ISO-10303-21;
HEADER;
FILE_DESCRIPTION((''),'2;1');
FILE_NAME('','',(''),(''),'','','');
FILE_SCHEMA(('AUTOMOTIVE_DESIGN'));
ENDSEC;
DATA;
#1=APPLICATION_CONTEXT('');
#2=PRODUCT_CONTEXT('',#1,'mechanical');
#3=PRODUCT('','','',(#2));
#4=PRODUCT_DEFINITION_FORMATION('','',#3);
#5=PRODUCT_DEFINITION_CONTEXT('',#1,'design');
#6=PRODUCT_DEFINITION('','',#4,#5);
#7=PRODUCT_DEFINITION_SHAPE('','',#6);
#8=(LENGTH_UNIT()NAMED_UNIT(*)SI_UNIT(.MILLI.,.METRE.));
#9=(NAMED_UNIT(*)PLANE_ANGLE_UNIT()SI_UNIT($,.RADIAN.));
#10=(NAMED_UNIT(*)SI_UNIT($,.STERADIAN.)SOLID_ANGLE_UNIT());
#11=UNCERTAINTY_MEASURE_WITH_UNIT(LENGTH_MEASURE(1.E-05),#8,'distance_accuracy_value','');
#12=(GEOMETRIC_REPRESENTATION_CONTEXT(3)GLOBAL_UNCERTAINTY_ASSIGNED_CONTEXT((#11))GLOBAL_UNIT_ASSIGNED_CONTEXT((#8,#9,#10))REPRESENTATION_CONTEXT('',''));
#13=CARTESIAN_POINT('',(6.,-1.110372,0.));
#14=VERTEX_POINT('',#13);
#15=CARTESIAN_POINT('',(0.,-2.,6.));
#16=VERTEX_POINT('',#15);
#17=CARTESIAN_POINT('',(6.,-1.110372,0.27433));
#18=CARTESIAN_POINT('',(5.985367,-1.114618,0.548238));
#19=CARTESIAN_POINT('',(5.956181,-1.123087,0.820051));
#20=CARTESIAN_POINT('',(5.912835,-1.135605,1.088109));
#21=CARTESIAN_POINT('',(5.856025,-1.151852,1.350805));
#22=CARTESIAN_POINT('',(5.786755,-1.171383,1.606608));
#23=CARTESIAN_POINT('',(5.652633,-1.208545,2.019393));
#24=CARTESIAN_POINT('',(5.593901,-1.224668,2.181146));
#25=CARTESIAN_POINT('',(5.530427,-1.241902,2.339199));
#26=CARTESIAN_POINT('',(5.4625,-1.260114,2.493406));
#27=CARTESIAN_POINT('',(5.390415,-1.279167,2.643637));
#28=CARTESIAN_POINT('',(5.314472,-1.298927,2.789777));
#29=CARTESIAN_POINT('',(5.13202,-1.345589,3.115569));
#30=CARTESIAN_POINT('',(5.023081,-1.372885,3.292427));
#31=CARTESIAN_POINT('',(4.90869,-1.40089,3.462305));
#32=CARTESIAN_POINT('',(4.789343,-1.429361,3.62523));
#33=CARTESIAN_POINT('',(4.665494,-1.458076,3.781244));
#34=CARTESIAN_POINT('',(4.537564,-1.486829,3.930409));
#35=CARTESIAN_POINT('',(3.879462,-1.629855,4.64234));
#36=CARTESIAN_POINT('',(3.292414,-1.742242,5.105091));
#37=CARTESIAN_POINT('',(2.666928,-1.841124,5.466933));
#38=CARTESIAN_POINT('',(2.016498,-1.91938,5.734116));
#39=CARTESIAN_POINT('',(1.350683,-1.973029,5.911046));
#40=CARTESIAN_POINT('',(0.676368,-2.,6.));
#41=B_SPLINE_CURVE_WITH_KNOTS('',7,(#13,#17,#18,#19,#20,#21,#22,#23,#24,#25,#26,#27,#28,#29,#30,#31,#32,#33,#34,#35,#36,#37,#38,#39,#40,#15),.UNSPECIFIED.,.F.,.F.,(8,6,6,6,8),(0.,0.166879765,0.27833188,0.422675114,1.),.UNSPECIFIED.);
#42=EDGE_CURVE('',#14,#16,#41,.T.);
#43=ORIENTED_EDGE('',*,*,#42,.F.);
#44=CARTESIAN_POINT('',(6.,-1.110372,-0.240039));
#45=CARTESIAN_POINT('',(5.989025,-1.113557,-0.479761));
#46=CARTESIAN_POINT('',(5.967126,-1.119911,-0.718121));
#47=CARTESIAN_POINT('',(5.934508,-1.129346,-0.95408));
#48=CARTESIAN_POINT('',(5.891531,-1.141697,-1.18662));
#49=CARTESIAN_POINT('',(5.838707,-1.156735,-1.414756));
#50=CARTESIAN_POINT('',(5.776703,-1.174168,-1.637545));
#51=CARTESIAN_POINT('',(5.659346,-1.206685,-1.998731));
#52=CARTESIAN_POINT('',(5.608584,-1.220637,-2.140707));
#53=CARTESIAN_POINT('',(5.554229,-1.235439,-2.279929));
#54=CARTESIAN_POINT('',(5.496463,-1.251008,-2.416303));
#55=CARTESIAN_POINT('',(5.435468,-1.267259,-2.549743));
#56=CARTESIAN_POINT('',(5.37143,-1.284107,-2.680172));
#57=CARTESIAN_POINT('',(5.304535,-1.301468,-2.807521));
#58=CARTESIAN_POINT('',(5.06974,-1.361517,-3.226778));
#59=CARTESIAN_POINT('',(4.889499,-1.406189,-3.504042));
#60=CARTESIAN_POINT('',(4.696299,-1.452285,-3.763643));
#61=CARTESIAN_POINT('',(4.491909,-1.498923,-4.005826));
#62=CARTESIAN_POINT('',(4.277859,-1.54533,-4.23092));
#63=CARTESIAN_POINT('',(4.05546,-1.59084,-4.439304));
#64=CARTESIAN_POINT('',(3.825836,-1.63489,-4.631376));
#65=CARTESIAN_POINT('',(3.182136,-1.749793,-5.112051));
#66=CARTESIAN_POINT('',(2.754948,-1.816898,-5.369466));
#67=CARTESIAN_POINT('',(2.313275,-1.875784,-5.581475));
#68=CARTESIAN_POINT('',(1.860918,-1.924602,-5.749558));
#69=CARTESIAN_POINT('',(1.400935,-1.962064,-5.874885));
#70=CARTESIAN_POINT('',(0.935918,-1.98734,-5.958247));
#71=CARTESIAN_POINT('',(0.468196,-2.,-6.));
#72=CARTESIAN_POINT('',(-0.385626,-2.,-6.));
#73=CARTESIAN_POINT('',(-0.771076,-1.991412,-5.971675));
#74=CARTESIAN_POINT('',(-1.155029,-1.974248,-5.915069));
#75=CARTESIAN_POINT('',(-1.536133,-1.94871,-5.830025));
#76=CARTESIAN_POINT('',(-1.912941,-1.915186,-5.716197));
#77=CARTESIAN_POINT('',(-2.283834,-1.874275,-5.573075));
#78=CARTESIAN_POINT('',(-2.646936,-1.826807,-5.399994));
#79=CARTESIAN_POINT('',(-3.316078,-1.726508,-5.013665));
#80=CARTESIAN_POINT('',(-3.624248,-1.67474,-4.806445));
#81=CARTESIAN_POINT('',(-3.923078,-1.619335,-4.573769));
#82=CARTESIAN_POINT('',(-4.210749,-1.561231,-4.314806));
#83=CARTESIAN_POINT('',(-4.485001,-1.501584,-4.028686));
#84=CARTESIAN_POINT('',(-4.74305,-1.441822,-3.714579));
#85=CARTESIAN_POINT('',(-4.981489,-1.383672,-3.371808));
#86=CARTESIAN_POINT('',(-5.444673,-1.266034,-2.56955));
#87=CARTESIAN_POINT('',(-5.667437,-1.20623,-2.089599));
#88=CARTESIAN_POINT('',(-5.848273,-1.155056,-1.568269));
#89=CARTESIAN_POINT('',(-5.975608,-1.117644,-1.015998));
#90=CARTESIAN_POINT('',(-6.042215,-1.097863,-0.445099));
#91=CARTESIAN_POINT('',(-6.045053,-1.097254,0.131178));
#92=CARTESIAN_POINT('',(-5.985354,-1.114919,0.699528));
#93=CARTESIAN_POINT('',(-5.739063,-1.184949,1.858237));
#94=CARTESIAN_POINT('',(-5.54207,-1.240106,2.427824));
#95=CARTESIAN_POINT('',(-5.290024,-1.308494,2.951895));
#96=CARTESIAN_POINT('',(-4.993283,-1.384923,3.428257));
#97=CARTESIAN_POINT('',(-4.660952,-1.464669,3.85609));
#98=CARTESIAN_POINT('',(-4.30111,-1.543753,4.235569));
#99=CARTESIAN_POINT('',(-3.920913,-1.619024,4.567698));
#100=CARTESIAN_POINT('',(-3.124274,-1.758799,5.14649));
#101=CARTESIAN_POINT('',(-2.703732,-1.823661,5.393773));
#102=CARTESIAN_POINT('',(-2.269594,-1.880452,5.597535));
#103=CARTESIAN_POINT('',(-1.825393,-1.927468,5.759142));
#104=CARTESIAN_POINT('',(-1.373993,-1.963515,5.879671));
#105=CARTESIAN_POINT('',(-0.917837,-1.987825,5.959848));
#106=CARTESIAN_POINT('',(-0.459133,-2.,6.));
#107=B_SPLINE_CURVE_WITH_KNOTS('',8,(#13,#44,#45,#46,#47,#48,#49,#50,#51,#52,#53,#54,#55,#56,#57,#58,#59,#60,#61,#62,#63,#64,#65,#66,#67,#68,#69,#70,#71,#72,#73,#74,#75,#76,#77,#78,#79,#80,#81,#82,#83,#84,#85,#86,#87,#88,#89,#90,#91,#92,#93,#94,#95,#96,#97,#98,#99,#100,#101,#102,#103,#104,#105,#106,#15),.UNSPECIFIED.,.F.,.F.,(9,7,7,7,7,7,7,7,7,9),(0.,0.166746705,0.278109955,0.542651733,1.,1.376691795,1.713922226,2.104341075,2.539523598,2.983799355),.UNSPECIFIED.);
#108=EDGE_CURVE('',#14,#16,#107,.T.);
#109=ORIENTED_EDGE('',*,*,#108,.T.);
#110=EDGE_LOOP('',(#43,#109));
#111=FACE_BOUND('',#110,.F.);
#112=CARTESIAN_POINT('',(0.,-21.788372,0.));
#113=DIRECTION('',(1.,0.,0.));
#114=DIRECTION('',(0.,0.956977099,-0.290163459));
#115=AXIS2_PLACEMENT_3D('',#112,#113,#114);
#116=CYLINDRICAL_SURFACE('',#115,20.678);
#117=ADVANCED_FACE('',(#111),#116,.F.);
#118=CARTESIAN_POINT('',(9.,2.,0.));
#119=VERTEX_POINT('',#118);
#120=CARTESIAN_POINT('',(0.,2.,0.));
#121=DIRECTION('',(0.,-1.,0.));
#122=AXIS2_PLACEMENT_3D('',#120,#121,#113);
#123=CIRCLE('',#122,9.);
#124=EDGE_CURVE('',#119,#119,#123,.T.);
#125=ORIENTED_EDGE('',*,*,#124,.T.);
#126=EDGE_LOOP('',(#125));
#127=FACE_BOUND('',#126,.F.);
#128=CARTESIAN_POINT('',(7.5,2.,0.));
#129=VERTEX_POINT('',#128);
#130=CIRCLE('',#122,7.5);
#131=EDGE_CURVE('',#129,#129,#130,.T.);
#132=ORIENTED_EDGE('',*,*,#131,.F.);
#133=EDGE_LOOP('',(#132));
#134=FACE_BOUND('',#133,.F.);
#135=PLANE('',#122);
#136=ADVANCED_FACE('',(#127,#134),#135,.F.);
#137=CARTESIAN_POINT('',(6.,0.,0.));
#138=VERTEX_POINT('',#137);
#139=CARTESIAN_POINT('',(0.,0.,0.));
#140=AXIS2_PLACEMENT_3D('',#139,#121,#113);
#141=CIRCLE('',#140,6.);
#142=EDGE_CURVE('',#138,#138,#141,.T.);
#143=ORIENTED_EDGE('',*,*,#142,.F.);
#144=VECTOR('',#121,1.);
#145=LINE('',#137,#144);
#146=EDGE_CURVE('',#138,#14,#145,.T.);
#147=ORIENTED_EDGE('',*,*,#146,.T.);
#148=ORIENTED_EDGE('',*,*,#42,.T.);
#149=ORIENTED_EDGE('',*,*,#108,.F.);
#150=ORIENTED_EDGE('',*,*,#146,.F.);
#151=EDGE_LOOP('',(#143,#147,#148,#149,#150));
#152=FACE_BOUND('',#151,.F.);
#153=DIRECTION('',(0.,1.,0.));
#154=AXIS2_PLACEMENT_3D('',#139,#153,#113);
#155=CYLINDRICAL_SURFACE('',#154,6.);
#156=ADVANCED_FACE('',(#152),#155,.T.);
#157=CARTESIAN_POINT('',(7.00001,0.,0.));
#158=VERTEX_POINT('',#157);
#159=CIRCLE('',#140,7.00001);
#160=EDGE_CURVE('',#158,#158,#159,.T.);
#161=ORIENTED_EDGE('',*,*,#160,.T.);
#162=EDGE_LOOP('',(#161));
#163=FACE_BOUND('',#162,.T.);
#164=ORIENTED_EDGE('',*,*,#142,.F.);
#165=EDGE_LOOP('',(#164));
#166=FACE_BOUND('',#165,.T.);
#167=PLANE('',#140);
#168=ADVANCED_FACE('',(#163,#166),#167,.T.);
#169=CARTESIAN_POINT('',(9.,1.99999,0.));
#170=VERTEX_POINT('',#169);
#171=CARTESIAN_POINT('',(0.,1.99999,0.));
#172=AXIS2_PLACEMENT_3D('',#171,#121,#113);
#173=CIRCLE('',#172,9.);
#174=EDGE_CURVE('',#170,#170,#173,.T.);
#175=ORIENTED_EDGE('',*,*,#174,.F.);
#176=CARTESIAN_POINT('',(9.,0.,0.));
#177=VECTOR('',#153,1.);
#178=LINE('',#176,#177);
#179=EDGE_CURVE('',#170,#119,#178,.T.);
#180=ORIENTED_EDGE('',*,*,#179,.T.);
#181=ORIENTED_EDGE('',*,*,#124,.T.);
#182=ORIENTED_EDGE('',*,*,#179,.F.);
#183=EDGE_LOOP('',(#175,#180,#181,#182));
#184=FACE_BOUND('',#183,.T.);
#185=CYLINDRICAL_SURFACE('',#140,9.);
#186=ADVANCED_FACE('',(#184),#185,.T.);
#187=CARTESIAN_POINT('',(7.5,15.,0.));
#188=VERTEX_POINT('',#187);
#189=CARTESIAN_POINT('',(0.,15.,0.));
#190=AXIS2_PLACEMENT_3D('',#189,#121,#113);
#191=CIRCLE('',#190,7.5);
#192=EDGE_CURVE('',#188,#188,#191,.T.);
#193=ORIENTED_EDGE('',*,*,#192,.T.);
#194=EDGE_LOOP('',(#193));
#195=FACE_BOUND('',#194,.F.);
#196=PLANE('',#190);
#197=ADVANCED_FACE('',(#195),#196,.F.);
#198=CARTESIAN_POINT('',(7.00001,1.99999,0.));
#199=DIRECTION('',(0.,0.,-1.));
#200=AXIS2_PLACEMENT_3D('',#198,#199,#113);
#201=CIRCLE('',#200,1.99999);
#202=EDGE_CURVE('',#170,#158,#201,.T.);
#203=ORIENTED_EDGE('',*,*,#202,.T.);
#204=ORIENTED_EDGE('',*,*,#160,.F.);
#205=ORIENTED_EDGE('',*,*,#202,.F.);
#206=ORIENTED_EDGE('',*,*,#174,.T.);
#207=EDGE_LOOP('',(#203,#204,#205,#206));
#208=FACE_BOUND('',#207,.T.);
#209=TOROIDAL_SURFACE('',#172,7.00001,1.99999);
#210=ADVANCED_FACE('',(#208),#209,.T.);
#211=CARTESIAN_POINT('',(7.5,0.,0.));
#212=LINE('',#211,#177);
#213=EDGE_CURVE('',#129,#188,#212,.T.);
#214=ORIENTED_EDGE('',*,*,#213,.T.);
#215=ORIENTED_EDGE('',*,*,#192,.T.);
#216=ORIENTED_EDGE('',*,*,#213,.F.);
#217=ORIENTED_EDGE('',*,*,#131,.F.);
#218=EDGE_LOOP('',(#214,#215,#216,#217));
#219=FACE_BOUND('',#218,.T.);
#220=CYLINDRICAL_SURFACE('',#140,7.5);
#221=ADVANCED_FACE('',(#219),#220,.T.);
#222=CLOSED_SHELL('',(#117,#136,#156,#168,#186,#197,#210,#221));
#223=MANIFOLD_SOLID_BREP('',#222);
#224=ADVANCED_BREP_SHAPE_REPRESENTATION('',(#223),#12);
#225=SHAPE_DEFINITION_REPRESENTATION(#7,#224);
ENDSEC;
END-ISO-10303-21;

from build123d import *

# Parameters (mm, degrees)
F0_R     = 7.5
F1_DEPTH = 15
F2_R     = 9
F3_DEPTH = 2
F4_R     = 6
F5_DEPTH = 2
F7_DEPTH = 12.5
F8_R     = 1.99999


# Not quite as in the source:
# - a fillet or chamfer is up to 0.001 mm smaller than in the source, because OpenCascade refuses the exact size


with BuildPart() as f1:
    # F0 (on Front) → F1 (new body)
    with BuildSketch(Plane.XZ):
        Circle(F0_R)
    extrude(amount=-F1_DEPTH)

    # F2 (on Front) → F3 (join)
    with BuildSketch(Plane.XZ):
        Circle(F2_R)
    extrude(amount=-F3_DEPTH)

    # F4 (on Front) → F5 (join)
    with BuildSketch(Plane.XZ):
        Circle(F4_R)
    extrude(amount=F5_DEPTH)

    # F6 (on Right) → F7 (cut, symmetric)
    with BuildSketch(Plane.YZ):
        with BuildLine():
            ThreePointArc((-2, -6), (-1.1103724444, 0), (-2, 6))
            Line((-2, 6), (-2, -6))
        make_face()
    extrude(amount=F7_DEPTH, both=True, mode=Mode.SUBTRACT)

    # F8 (radius 2 in the source; OpenCascade refuses exactly that, so slightly less here)
    f8_edges = [f1.edges().sort_by_distance(p)[0] for p in [
        (-9, 0, 0),
    ]]
    fillet(f8_edges, radius=F8_R)


solid = f1.part
